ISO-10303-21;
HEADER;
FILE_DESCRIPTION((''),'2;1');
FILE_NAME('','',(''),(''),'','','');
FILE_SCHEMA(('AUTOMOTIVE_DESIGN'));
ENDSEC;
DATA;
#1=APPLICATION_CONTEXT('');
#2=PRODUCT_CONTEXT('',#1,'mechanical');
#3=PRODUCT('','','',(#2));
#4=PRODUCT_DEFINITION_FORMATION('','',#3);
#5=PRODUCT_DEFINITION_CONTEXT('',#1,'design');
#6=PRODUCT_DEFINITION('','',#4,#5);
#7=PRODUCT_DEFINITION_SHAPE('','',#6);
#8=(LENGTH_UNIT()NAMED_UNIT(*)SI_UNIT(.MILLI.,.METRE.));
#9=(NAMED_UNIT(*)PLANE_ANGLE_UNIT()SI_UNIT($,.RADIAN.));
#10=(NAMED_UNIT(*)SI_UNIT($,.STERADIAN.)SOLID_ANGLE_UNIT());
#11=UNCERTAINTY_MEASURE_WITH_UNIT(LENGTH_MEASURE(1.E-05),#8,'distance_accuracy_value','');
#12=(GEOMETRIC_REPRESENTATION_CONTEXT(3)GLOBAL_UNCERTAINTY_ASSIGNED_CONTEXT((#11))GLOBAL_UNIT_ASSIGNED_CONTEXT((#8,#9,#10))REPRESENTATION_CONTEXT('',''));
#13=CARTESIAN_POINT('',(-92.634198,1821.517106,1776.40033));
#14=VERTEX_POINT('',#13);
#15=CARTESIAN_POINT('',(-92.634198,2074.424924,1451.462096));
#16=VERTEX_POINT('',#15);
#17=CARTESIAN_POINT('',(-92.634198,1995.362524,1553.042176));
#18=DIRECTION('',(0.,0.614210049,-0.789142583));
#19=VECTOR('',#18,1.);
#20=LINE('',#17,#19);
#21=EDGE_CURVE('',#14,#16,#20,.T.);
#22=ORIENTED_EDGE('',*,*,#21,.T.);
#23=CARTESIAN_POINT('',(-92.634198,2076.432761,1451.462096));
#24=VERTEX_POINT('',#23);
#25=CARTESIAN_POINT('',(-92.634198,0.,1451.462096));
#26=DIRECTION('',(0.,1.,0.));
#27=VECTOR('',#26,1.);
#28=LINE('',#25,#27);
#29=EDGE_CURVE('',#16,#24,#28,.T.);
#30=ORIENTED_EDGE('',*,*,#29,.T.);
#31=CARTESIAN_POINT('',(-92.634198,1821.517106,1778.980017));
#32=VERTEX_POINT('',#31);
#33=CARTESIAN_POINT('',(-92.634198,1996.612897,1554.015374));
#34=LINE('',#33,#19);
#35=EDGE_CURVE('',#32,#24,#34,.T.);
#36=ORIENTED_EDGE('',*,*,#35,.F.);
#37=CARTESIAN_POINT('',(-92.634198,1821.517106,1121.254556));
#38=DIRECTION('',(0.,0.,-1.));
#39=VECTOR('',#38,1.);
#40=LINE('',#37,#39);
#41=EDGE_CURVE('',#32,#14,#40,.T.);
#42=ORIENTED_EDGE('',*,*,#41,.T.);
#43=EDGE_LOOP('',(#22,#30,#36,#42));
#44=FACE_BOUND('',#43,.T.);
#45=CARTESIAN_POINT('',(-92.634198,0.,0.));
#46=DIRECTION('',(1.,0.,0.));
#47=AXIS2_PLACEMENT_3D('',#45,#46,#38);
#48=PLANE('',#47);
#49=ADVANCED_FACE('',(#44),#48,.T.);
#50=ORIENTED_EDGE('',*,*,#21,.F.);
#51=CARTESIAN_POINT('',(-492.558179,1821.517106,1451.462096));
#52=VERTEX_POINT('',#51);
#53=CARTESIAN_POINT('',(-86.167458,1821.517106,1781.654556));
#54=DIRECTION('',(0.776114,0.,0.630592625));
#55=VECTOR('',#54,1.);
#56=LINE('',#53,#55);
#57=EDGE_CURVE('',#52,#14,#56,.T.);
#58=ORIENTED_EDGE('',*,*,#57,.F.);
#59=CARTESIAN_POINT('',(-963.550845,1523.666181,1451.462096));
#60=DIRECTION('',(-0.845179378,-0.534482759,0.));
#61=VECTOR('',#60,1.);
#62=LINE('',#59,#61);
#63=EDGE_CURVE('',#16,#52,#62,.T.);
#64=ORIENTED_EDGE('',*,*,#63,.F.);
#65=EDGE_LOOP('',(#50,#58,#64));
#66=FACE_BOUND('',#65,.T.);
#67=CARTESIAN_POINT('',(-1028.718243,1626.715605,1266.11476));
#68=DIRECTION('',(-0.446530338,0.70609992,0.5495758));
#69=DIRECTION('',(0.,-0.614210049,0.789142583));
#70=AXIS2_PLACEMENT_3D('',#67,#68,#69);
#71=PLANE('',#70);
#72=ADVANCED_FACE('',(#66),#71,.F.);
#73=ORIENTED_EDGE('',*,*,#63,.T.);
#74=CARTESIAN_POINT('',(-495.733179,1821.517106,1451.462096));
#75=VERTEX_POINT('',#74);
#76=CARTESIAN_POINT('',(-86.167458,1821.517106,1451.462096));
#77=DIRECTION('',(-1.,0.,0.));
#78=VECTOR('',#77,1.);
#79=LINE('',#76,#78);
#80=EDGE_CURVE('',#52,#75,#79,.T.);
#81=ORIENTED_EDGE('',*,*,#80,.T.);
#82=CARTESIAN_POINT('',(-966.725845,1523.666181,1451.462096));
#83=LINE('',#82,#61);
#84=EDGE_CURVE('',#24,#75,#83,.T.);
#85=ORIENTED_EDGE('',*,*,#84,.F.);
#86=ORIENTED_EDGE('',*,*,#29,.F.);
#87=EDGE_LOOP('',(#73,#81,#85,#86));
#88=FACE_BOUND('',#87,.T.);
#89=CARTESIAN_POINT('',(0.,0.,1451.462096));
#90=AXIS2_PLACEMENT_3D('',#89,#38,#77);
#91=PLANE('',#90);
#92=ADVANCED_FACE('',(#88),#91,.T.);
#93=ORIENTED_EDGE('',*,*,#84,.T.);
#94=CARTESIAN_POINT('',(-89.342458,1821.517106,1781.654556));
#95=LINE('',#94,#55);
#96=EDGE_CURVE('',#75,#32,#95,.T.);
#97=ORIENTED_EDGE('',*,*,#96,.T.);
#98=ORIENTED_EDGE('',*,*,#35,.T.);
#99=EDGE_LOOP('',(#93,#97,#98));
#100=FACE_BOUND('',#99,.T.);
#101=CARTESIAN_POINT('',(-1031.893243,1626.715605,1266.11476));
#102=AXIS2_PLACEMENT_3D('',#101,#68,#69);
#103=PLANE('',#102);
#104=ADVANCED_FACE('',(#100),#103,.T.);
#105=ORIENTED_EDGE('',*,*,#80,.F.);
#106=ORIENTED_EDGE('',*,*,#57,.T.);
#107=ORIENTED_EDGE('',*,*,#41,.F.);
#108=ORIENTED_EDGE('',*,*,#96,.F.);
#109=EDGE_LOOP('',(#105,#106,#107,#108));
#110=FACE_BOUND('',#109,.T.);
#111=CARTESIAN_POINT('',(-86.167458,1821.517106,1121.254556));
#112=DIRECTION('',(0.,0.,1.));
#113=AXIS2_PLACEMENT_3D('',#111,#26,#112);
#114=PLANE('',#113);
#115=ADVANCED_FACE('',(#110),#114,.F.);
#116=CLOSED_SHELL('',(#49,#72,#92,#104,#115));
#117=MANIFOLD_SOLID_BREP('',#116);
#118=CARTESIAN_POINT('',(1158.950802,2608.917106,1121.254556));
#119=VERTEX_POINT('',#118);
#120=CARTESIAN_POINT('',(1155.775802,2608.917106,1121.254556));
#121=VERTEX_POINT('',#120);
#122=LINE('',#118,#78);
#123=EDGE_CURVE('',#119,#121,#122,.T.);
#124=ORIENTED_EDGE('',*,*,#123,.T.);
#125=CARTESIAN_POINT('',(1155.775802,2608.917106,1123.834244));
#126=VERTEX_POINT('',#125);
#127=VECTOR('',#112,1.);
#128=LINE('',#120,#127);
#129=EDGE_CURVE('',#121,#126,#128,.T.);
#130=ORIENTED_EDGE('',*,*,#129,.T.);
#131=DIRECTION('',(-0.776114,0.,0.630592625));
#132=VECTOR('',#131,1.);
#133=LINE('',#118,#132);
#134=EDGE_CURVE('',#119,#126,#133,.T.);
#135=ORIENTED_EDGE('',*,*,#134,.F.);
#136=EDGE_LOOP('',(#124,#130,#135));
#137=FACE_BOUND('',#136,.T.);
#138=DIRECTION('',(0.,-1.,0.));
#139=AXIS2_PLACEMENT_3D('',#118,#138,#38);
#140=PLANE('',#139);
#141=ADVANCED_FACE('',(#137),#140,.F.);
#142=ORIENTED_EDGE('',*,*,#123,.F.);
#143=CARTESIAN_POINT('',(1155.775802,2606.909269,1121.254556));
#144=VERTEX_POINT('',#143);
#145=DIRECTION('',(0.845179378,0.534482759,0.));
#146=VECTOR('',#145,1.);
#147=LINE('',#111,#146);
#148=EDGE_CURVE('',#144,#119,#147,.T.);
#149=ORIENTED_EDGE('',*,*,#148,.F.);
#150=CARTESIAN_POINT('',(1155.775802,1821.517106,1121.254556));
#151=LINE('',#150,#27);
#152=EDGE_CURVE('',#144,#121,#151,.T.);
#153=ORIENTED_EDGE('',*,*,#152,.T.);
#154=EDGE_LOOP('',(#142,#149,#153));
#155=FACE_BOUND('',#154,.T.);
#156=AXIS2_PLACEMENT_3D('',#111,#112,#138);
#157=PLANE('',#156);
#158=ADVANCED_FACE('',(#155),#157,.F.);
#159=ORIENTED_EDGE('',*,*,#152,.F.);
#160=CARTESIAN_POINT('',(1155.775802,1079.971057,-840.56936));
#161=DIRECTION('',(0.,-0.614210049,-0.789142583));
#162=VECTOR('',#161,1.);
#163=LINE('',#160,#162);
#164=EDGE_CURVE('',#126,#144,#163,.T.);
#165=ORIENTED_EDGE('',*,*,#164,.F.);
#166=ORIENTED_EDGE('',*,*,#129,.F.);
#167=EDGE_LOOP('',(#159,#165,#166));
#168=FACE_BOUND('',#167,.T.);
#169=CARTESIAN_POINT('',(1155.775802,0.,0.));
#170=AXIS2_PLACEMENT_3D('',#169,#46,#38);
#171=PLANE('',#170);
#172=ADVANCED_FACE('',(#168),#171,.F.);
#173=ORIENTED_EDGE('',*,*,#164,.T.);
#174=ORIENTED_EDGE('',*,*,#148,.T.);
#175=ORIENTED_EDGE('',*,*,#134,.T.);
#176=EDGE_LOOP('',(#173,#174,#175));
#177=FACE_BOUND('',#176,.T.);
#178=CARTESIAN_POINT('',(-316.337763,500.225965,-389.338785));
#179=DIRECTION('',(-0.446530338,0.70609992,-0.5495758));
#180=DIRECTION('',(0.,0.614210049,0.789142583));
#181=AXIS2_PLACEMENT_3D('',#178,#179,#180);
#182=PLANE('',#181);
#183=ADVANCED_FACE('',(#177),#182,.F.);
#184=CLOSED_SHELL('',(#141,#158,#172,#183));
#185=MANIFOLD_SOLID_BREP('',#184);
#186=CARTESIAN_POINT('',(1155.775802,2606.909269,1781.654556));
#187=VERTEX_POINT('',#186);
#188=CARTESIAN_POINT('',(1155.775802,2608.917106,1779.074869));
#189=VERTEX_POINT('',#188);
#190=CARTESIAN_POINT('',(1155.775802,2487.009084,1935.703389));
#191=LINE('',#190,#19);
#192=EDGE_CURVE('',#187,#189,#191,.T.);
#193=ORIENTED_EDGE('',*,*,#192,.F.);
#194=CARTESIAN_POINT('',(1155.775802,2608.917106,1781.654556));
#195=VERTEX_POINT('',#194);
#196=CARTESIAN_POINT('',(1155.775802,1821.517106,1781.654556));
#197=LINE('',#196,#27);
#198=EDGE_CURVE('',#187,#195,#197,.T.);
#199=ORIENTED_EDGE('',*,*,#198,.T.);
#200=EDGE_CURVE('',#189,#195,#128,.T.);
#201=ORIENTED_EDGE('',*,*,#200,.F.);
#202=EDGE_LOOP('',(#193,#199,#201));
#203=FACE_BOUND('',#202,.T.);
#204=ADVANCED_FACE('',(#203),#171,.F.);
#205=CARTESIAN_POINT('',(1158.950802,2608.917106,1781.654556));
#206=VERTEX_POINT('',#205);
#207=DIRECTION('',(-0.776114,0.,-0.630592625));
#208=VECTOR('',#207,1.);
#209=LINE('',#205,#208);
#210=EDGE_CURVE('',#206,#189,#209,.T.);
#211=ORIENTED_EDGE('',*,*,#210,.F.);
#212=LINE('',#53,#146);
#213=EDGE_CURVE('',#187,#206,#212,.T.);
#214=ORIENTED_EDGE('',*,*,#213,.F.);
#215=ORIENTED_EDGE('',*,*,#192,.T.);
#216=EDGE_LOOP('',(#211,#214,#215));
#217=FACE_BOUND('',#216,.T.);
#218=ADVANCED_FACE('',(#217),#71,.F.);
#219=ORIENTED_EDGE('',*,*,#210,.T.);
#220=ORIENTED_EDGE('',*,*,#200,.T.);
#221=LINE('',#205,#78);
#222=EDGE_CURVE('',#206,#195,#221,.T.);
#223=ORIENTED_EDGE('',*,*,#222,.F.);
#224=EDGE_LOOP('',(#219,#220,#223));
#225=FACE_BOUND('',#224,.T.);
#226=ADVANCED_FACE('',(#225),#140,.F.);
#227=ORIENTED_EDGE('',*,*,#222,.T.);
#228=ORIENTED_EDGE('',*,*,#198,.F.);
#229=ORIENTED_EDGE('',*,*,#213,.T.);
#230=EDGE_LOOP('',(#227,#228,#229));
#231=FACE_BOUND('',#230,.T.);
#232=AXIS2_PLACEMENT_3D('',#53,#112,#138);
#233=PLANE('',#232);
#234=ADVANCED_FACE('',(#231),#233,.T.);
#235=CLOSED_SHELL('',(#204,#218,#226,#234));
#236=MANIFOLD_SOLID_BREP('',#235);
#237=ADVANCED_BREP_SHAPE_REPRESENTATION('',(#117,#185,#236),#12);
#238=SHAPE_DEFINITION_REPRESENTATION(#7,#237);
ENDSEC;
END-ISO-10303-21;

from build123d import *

# Parameters (mm, degrees)
SKETCH2_W          = 846.839584843
SKETCH2_H          = 871.457014635
CUT_EXTRUDE2_DEPTH = 1248.41
SKETCH3_W          = 597.069036036
SKETCH3_H          = 378.549018711
CUT_EXTRUDE3_DEPTH = 327.533


with BuildPart() as part:
    # Boss-Extrude1: read off the stored shape, not the designer's step
    # Boss-Extrude1: loft between two sections, ruled curve by curve
    boss_extrude1_from = [
        Edge.make_line((-86.167457674, 1821.517106037, 1121.25455637), (-492.567457674, 1821.517106037, 1451.45455637)),
        Edge.make_line((-492.567457674, 1821.517106037, 1451.45455637), (752.550801769, 2608.917106037, 1451.45455637)),
        Edge.make_line((752.550801769, 2608.917106037, 1451.45455637), (1158.950801769, 2608.917106037, 1121.25455637)),
        Edge.make_line((1158.950801769, 2608.917106037, 1121.25455637), (-86.167457674, 1821.517106037, 1121.25455637)),
    ]
    boss_extrude1_to = [
        Edge.make_line((-89.342457674, 1821.517106037, 1121.25455637), (-495.742457674, 1821.517106037, 1451.45455637)),
        Edge.make_line((-495.742457674, 1821.517106037, 1451.45455637), (749.375801769, 2608.917106037, 1451.45455637)),
        Edge.make_line((749.375801769, 2608.917106037, 1451.45455637), (1155.775801769, 2608.917106037, 1121.25455637)),
        Edge.make_line((1155.775801769, 2608.917106037, 1121.25455637), (-89.342457674, 1821.517106037, 1121.25455637)),
    ]
    boss_extrude1 = Solid(Shell([*[Face.make_surface_from_curves(boss_extrude1_from[k], boss_extrude1_to[k]) for k in range(4)], Face(Wire(boss_extrude1_from)), Face(Wire(boss_extrude1_to))]))
    add(boss_extrude1)

    # Mirror1: Boss-Extrude1 across plane
    add(boss_extrude1.mirror(Plane.XY.offset(1451.45455637)))

    # Sketch2 → Cut-Extrude2 (cut)
    with BuildSketch(Plane(origin=(1155.775801769, 0, 0), x_dir=(0, 0, -1), z_dir=(1, 0, 0))):
        with Locations((-1412.887955953, 2222.276274549)):
            Rectangle(SKETCH2_W, SKETCH2_H)
    extrude(amount=-CUT_EXTRUDE2_DEPTH, mode=Mode.SUBTRACT)


with BuildPart() as cut_extrude2_piece_1:
    # of the separate pieces the step leaves, piece 1, a body of its own (cut_extrude2_pieces)
    add(part.part.solids().sort_by_distance((-92.634198231, 1821.517106037, 1126.508783072))[0])

    # Sketch3 → Cut-Extrude3 (cut)
    with BuildSketch(Plane.XY.offset(1123.929095572)):
        with Locations((-298.534518018, 1946.185413494)):
            Rectangle(SKETCH3_W, SKETCH3_H)
    extrude(amount=CUT_EXTRUDE3_DEPTH, mode=Mode.SUBTRACT)


with BuildPart() as cut_extrude2_piece_2:
    # of the separate pieces the step leaves, piece 2, a body of its own (cut_extrude2_pieces)
    add(part.part.solids().sort_by_distance((1158.950801769, 2608.917106037, 1121.25455637))[0])


with BuildPart() as cut_extrude2_piece_3:
    # of the separate pieces the step leaves, piece 3, a body of its own (cut_extrude2_pieces)
    add(part.part.solids().sort_by_distance((1155.775801769, 2608.917106037, 1779.074868869))[0])


solid = Compound([cut_extrude2_piece_1.part, cut_extrude2_piece_2.part, cut_extrude2_piece_3.part])
